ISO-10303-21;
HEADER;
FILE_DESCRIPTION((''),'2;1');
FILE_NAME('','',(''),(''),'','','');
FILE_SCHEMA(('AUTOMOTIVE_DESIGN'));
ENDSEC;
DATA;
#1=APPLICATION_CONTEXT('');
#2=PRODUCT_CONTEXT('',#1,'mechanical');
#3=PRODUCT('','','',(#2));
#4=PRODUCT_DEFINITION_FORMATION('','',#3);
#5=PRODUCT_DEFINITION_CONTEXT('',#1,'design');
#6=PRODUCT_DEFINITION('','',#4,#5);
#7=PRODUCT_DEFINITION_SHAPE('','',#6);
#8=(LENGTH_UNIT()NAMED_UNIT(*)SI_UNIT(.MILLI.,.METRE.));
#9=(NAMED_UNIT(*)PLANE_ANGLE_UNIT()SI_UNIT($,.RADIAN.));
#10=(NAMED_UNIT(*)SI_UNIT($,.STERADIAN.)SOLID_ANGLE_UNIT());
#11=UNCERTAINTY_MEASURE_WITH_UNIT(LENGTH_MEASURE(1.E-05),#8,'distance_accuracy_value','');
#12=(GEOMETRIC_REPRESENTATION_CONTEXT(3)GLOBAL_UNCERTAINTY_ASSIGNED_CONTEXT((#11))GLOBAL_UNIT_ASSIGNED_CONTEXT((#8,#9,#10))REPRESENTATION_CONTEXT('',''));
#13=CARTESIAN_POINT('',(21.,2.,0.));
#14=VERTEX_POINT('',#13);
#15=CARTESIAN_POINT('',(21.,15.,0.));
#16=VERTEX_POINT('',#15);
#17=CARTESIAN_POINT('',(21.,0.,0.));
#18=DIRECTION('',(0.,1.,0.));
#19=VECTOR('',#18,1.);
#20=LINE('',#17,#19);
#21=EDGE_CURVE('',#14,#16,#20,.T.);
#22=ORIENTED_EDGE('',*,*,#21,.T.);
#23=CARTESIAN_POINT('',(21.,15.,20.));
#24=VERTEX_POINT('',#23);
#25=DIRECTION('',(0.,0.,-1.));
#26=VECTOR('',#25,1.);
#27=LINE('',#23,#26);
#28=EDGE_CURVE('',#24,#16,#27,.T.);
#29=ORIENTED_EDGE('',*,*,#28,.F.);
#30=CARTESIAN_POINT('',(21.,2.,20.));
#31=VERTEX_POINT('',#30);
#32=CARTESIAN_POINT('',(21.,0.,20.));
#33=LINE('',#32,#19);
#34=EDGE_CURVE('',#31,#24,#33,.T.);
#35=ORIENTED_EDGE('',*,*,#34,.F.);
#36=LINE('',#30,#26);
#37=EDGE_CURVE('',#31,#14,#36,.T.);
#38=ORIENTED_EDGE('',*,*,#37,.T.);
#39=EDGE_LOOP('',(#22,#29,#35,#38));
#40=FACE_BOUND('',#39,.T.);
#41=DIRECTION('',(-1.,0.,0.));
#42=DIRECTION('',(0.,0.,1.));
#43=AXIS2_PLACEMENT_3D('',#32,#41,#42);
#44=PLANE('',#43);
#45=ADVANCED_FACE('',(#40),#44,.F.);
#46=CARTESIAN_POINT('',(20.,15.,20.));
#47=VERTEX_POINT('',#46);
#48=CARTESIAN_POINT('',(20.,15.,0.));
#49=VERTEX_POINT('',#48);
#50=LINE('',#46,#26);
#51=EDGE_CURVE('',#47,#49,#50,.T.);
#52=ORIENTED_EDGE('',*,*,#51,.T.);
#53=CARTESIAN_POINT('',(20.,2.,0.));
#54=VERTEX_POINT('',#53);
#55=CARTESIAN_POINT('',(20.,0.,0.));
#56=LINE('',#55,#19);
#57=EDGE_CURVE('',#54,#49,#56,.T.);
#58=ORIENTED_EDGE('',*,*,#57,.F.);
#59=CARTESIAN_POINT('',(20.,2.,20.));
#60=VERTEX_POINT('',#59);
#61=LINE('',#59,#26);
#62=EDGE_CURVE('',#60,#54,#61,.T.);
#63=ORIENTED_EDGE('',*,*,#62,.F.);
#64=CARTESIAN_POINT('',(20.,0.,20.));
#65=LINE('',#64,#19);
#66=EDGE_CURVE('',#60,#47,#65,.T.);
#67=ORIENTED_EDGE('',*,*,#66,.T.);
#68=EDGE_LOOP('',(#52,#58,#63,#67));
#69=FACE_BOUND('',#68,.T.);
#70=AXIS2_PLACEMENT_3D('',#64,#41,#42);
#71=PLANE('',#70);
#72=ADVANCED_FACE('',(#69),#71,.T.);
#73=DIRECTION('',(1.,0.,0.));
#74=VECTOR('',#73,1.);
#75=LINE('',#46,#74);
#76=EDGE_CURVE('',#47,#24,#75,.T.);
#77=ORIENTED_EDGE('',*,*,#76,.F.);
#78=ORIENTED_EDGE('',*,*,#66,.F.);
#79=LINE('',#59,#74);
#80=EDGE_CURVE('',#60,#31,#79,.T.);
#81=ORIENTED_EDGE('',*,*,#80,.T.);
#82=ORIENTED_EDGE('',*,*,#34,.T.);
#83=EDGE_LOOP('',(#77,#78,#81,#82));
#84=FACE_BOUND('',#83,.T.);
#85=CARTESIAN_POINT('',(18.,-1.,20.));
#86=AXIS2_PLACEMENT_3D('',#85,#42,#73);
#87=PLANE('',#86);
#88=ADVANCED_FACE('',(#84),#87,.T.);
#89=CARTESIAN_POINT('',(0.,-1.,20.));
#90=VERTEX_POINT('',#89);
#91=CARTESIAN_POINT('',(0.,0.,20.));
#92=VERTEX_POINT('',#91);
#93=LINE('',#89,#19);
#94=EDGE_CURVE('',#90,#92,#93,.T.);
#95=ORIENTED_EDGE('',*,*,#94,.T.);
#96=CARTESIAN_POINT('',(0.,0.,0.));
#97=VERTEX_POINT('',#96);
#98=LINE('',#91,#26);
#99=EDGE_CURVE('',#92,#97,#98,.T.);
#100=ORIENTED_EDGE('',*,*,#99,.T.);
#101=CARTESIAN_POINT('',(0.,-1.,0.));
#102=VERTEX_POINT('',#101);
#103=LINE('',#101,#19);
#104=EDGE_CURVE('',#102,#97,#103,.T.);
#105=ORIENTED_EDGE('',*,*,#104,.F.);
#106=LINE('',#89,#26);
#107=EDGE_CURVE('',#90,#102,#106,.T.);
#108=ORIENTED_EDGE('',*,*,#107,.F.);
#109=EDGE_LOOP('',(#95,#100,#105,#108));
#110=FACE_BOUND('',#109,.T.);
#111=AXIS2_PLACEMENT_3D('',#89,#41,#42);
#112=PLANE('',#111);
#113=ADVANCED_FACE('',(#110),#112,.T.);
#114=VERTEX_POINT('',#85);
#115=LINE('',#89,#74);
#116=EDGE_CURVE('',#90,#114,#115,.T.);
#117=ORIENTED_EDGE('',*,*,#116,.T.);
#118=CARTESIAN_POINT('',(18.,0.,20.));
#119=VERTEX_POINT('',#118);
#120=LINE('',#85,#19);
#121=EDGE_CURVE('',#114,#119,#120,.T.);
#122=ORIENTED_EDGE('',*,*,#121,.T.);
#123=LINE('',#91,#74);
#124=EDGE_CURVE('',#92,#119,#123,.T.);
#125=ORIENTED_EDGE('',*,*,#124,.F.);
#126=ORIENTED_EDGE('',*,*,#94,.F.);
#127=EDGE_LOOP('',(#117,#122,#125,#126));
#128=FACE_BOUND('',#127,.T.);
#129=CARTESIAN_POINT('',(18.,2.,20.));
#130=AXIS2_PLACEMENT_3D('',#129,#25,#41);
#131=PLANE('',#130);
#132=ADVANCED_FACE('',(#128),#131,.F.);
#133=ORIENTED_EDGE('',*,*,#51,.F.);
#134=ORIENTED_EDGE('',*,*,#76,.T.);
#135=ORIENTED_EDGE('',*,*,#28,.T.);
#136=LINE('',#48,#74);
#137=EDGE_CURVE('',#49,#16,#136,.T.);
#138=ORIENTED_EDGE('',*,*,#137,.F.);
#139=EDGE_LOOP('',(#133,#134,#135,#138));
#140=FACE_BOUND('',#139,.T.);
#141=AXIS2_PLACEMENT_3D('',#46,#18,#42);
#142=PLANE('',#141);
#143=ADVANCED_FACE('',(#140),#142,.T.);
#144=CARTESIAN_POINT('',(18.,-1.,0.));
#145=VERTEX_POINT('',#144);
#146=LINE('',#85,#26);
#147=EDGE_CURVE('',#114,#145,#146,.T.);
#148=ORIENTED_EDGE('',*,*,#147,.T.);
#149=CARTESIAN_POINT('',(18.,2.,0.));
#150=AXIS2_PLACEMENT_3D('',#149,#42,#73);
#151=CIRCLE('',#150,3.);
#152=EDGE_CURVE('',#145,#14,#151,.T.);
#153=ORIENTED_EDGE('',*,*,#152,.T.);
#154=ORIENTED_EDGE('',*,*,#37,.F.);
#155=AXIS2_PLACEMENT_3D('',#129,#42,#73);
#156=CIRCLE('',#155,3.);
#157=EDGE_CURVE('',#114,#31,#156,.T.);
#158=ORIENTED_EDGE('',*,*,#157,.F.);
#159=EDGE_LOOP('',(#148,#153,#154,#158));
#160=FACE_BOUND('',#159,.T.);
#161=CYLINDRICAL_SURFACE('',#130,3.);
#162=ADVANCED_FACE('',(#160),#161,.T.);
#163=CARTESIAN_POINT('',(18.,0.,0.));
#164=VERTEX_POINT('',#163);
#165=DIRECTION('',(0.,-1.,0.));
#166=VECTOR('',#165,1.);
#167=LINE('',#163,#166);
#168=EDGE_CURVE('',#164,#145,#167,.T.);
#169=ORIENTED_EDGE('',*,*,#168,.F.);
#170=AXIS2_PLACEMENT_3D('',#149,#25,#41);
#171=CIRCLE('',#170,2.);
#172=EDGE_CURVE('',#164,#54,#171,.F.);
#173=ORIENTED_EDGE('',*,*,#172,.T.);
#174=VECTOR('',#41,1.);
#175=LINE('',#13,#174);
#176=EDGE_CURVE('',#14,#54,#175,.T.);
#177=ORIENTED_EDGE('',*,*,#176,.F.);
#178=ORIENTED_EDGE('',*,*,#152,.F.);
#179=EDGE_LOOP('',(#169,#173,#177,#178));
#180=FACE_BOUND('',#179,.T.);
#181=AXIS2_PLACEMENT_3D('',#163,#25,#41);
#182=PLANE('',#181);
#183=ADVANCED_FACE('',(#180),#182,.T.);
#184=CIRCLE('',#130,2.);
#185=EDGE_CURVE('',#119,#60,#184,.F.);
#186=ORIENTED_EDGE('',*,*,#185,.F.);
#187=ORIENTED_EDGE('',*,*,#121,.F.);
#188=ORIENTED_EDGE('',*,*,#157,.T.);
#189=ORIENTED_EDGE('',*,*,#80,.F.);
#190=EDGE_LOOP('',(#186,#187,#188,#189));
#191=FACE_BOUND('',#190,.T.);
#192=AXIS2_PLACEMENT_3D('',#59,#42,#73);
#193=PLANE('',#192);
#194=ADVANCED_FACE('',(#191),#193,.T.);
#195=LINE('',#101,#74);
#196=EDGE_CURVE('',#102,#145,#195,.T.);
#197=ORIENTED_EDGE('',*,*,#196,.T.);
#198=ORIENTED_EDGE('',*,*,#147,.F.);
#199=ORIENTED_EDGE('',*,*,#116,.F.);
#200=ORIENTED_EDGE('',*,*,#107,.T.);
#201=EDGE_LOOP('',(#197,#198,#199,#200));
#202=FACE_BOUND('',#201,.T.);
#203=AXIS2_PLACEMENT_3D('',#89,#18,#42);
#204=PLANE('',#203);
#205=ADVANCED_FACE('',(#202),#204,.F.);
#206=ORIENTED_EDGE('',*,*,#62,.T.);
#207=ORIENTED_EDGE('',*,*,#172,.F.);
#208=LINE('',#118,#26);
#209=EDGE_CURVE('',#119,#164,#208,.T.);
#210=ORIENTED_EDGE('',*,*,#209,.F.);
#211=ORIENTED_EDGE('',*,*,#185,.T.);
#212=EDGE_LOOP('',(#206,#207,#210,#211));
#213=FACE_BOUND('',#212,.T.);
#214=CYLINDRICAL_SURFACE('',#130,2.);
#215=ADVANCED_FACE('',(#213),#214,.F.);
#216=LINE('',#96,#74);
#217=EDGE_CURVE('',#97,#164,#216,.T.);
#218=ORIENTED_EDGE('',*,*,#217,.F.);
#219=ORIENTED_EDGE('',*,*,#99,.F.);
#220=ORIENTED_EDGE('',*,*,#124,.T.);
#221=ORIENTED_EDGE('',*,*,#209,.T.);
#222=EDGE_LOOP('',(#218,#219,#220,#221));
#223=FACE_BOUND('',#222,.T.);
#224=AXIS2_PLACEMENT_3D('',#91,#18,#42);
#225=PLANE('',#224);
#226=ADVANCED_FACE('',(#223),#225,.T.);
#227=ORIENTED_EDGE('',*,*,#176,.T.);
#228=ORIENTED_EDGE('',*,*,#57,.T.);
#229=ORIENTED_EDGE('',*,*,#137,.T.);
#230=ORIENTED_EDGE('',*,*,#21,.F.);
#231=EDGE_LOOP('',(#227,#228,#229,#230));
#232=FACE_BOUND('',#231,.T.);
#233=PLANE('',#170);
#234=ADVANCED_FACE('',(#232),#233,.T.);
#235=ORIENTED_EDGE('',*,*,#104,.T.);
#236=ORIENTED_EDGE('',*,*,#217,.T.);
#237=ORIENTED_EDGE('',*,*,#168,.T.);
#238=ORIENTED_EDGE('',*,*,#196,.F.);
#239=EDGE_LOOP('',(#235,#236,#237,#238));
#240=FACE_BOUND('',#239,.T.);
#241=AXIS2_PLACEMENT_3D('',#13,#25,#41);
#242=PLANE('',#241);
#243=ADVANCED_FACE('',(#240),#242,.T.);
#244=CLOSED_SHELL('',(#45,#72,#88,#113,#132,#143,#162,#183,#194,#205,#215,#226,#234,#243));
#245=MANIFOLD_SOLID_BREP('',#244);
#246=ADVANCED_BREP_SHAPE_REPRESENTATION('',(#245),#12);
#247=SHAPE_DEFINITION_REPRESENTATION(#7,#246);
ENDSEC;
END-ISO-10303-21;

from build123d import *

# Parameters (mm, degrees)
SM_BASE_FLANGE_1_DEPTH = 20


# Sheet-metal steps are written as plain solids
with BuildPart() as part:
    # Sketch 1 → 基体-法兰1 (new body)
    with BuildSketch(Plane.XY):
        with BuildLine():
            Line((0, 0), (18, 0))
            ThreePointArc((18, 0), (19.414213562, 0.585786438), (20, 2))
            Line((20, 2), (20, 15))
            Line((20, 15), (21, 15))
            Line((21, 15), (21, 2))
            ThreePointArc((21, 2), (20.121320344, -0.121320344), (18, -1))
            Line((18, -1), (0, -1))
            Line((0, -1), (0, 0))
        make_face()
    extrude(amount=SM_BASE_FLANGE_1_DEPTH)


solid = part.part
